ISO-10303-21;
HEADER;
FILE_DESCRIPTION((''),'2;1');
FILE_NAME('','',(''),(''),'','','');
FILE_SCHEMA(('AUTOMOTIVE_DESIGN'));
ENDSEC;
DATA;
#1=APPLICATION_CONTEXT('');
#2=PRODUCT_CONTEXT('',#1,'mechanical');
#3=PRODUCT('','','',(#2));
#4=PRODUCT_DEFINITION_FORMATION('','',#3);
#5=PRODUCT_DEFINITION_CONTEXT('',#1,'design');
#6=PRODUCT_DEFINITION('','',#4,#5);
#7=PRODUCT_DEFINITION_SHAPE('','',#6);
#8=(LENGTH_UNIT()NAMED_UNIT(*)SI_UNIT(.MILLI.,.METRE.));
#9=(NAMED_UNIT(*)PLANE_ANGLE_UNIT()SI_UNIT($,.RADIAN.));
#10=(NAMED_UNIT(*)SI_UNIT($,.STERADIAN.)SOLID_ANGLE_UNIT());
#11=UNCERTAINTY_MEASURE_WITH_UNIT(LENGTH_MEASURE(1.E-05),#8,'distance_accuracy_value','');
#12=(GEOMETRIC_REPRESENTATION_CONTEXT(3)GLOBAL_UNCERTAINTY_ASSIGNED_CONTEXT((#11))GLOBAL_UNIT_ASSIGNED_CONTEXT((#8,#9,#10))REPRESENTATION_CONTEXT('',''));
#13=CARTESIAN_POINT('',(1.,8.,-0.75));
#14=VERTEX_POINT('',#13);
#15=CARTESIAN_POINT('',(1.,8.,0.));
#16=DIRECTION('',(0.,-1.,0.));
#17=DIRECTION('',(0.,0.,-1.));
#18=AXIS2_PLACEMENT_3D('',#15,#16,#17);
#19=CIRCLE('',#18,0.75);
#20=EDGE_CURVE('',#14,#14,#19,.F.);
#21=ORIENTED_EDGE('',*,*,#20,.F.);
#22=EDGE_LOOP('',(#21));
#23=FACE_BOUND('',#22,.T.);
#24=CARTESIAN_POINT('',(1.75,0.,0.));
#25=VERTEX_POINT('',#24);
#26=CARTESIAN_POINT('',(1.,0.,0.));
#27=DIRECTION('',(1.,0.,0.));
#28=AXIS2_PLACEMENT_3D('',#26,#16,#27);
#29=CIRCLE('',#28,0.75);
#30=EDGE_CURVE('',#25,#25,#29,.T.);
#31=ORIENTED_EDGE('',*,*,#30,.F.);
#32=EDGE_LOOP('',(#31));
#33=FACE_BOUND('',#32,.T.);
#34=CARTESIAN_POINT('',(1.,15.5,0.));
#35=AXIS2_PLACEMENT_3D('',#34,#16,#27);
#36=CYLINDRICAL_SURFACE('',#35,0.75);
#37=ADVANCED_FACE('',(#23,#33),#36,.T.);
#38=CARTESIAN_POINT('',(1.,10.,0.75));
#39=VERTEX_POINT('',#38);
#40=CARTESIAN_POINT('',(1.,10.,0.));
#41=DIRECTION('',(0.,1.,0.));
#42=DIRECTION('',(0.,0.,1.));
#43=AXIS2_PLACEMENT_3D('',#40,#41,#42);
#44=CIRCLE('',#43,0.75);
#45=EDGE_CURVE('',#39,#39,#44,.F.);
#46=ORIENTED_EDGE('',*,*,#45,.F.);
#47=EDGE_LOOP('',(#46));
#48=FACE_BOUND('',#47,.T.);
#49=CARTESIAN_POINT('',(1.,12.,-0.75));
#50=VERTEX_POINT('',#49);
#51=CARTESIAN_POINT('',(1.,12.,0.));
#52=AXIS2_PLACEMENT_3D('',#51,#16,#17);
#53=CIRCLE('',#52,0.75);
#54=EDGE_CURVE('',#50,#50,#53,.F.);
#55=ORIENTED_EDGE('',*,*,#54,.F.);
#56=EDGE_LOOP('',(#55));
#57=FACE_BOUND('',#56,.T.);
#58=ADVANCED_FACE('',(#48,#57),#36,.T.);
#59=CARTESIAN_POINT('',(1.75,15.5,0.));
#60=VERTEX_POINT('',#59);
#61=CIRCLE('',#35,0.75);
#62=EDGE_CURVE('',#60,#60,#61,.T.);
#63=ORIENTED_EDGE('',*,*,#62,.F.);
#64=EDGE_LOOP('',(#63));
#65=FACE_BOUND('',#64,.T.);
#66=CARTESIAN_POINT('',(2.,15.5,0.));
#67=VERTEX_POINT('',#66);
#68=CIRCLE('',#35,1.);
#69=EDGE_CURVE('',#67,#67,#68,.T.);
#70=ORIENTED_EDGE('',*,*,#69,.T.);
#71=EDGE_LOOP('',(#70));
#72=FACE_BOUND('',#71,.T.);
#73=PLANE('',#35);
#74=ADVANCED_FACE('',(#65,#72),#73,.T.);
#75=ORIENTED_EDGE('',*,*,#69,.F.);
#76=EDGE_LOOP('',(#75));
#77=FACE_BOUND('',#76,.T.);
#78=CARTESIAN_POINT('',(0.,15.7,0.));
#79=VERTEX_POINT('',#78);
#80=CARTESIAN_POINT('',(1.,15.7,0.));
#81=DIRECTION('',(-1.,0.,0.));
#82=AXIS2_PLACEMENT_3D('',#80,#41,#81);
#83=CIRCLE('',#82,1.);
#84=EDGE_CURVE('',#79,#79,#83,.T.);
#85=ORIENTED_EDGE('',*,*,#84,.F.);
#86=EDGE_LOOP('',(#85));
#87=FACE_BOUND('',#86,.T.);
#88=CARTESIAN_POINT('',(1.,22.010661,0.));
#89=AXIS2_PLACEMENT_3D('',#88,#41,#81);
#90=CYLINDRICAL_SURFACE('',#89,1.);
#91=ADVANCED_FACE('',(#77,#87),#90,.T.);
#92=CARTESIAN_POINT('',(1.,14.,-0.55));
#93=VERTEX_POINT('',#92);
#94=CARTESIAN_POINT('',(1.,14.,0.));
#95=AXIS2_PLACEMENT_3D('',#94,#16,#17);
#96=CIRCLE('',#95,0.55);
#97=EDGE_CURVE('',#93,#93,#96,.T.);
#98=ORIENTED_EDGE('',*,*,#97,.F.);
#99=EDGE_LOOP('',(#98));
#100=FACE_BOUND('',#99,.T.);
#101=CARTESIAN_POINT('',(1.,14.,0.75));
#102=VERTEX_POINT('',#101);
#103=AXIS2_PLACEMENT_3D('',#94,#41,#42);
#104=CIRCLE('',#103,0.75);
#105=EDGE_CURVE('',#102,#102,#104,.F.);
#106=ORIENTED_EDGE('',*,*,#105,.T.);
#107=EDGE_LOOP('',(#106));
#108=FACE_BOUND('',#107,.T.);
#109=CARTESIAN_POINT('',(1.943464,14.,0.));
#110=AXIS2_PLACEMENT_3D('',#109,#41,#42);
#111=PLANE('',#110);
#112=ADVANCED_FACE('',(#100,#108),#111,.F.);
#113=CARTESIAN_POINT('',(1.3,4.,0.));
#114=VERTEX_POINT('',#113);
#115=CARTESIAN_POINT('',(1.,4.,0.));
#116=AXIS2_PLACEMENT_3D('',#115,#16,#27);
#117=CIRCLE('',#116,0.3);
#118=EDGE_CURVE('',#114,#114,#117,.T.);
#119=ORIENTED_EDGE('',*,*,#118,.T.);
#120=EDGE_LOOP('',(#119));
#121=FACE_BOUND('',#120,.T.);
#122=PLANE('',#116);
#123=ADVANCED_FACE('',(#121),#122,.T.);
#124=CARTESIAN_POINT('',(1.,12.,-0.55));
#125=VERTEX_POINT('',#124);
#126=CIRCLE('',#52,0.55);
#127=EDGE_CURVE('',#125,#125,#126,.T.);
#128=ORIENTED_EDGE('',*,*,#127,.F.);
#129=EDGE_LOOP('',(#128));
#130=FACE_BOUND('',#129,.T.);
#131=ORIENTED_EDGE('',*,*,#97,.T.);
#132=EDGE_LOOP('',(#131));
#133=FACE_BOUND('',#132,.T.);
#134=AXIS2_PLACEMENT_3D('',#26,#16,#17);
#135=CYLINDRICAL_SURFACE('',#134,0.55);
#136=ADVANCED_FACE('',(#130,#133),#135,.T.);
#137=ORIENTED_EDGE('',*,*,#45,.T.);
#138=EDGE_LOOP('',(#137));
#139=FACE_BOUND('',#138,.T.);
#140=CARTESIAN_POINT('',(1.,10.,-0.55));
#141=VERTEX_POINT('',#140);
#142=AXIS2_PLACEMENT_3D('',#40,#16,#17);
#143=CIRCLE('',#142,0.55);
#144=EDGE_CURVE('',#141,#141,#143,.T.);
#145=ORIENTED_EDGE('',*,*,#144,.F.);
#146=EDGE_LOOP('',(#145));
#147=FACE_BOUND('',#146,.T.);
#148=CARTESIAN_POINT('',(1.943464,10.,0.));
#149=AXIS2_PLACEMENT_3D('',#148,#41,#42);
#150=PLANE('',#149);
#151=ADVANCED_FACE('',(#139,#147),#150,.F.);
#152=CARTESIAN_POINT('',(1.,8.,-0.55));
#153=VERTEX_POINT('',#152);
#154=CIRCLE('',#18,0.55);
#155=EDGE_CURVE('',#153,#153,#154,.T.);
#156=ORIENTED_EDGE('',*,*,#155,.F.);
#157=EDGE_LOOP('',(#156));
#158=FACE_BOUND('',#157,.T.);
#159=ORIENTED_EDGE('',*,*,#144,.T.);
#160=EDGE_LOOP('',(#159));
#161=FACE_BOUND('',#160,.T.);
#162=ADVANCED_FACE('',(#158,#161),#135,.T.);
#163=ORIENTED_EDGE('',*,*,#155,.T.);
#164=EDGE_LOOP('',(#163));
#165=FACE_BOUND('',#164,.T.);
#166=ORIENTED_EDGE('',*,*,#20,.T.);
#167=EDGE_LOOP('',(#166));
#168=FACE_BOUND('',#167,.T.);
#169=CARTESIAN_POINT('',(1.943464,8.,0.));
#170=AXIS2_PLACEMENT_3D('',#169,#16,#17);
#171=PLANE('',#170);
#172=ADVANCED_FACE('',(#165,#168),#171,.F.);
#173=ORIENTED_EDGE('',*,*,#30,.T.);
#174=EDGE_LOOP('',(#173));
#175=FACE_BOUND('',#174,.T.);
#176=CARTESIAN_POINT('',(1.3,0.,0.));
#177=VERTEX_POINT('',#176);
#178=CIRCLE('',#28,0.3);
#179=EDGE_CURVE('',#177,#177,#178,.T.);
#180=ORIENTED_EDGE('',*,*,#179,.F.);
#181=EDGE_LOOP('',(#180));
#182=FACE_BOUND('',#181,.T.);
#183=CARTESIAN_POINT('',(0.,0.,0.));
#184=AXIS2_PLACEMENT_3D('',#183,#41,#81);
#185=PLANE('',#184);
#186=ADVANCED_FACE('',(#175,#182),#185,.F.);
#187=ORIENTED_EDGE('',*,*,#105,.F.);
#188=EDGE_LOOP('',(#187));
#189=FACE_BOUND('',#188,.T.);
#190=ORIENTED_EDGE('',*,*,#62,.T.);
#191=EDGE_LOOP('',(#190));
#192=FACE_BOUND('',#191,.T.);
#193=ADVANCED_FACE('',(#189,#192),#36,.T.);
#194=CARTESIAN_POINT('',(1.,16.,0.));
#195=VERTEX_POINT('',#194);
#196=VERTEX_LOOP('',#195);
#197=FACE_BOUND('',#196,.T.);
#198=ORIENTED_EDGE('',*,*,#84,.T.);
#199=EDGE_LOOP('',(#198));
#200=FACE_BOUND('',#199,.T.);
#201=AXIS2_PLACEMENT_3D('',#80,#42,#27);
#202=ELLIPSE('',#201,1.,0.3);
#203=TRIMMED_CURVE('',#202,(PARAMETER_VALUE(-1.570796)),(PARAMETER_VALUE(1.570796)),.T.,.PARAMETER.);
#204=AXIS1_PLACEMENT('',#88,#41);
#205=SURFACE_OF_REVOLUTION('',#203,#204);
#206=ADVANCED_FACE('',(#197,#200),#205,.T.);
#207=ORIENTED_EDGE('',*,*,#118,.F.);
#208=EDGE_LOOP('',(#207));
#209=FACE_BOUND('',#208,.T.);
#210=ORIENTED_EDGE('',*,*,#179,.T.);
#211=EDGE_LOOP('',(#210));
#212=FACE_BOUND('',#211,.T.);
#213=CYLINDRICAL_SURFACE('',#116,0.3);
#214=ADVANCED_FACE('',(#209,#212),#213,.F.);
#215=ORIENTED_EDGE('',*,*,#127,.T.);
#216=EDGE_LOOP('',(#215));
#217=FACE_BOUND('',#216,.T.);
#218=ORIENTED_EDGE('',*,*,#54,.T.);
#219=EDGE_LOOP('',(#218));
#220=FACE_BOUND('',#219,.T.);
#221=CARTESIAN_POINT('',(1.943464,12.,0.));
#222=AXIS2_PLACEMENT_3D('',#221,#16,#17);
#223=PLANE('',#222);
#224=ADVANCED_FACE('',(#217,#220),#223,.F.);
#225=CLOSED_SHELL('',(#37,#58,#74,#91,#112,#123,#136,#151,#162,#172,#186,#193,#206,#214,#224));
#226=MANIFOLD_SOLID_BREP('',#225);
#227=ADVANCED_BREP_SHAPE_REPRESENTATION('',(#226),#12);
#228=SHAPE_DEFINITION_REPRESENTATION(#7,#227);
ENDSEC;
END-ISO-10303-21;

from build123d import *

# Parameters (mm, degrees)
SKETCH_2_R          = 1.288183927
SKETCH_2_R_2        = 0.75
CUT_EXTRUDE_1_DEPTH = 15.5
SKETCH_3_R          = 0.3
CUT_EXTRUDE_2_DEPTH = 4
SKETCH_8_W          = 0.393463538
SKETCH_8_H          = 2


with BuildPart() as part:
    # 草图1 → 旋转1 (revolve)
    with BuildSketch(Plane.XY):
        with BuildLine():
            Line((1, 0), (2, 0))
            Line((2, 0), (2, 15.7))
            add(Edge.make_bspline(
                [(2, 15.7), (2, 16), (1, 16)],
                knots=[0, 0, 0, 1.570796327, 1.570796327, 1.570796327], degree=2, weights=[1, 0.707106781, 1]))
            Line((1, 16), (1, 0))
        make_face()
    revolve(axis=Axis((1, 22.010661338, 0), (0, -1, 0)))

    # 草图2 → 切除-拉伸1 (cut)
    with BuildSketch(Plane.XZ):
        with Locations((1, 0)):
            Circle(SKETCH_2_R)
        with Locations((1, 0)):
            Circle(SKETCH_2_R_2, mode=Mode.SUBTRACT)
    extrude(amount=-CUT_EXTRUDE_1_DEPTH, mode=Mode.SUBTRACT)

    # 草图3 → 切除-拉伸2 (cut)
    with BuildSketch(Plane(origin=(0, 0, 0), x_dir=(-1, 0, 0), z_dir=(0, -1, 0))):
        with Locations((-1, 0)):
            Circle(SKETCH_3_R)
    extrude(amount=-CUT_EXTRUDE_2_DEPTH, mode=Mode.SUBTRACT)

    # 草图8 → 切除-旋转1 (revolve, cut)
    with BuildSketch(Plane.XY):
        with Locations((1.746731769, 13)):
            Rectangle(SKETCH_8_W, SKETCH_8_H)
        with Locations((1.746731769, 9)):
            Rectangle(SKETCH_8_W, SKETCH_8_H)
    revolve(axis=Axis((1, 0, 0), (0, 1, 0)), mode=Mode.SUBTRACT)


solid = part.part
